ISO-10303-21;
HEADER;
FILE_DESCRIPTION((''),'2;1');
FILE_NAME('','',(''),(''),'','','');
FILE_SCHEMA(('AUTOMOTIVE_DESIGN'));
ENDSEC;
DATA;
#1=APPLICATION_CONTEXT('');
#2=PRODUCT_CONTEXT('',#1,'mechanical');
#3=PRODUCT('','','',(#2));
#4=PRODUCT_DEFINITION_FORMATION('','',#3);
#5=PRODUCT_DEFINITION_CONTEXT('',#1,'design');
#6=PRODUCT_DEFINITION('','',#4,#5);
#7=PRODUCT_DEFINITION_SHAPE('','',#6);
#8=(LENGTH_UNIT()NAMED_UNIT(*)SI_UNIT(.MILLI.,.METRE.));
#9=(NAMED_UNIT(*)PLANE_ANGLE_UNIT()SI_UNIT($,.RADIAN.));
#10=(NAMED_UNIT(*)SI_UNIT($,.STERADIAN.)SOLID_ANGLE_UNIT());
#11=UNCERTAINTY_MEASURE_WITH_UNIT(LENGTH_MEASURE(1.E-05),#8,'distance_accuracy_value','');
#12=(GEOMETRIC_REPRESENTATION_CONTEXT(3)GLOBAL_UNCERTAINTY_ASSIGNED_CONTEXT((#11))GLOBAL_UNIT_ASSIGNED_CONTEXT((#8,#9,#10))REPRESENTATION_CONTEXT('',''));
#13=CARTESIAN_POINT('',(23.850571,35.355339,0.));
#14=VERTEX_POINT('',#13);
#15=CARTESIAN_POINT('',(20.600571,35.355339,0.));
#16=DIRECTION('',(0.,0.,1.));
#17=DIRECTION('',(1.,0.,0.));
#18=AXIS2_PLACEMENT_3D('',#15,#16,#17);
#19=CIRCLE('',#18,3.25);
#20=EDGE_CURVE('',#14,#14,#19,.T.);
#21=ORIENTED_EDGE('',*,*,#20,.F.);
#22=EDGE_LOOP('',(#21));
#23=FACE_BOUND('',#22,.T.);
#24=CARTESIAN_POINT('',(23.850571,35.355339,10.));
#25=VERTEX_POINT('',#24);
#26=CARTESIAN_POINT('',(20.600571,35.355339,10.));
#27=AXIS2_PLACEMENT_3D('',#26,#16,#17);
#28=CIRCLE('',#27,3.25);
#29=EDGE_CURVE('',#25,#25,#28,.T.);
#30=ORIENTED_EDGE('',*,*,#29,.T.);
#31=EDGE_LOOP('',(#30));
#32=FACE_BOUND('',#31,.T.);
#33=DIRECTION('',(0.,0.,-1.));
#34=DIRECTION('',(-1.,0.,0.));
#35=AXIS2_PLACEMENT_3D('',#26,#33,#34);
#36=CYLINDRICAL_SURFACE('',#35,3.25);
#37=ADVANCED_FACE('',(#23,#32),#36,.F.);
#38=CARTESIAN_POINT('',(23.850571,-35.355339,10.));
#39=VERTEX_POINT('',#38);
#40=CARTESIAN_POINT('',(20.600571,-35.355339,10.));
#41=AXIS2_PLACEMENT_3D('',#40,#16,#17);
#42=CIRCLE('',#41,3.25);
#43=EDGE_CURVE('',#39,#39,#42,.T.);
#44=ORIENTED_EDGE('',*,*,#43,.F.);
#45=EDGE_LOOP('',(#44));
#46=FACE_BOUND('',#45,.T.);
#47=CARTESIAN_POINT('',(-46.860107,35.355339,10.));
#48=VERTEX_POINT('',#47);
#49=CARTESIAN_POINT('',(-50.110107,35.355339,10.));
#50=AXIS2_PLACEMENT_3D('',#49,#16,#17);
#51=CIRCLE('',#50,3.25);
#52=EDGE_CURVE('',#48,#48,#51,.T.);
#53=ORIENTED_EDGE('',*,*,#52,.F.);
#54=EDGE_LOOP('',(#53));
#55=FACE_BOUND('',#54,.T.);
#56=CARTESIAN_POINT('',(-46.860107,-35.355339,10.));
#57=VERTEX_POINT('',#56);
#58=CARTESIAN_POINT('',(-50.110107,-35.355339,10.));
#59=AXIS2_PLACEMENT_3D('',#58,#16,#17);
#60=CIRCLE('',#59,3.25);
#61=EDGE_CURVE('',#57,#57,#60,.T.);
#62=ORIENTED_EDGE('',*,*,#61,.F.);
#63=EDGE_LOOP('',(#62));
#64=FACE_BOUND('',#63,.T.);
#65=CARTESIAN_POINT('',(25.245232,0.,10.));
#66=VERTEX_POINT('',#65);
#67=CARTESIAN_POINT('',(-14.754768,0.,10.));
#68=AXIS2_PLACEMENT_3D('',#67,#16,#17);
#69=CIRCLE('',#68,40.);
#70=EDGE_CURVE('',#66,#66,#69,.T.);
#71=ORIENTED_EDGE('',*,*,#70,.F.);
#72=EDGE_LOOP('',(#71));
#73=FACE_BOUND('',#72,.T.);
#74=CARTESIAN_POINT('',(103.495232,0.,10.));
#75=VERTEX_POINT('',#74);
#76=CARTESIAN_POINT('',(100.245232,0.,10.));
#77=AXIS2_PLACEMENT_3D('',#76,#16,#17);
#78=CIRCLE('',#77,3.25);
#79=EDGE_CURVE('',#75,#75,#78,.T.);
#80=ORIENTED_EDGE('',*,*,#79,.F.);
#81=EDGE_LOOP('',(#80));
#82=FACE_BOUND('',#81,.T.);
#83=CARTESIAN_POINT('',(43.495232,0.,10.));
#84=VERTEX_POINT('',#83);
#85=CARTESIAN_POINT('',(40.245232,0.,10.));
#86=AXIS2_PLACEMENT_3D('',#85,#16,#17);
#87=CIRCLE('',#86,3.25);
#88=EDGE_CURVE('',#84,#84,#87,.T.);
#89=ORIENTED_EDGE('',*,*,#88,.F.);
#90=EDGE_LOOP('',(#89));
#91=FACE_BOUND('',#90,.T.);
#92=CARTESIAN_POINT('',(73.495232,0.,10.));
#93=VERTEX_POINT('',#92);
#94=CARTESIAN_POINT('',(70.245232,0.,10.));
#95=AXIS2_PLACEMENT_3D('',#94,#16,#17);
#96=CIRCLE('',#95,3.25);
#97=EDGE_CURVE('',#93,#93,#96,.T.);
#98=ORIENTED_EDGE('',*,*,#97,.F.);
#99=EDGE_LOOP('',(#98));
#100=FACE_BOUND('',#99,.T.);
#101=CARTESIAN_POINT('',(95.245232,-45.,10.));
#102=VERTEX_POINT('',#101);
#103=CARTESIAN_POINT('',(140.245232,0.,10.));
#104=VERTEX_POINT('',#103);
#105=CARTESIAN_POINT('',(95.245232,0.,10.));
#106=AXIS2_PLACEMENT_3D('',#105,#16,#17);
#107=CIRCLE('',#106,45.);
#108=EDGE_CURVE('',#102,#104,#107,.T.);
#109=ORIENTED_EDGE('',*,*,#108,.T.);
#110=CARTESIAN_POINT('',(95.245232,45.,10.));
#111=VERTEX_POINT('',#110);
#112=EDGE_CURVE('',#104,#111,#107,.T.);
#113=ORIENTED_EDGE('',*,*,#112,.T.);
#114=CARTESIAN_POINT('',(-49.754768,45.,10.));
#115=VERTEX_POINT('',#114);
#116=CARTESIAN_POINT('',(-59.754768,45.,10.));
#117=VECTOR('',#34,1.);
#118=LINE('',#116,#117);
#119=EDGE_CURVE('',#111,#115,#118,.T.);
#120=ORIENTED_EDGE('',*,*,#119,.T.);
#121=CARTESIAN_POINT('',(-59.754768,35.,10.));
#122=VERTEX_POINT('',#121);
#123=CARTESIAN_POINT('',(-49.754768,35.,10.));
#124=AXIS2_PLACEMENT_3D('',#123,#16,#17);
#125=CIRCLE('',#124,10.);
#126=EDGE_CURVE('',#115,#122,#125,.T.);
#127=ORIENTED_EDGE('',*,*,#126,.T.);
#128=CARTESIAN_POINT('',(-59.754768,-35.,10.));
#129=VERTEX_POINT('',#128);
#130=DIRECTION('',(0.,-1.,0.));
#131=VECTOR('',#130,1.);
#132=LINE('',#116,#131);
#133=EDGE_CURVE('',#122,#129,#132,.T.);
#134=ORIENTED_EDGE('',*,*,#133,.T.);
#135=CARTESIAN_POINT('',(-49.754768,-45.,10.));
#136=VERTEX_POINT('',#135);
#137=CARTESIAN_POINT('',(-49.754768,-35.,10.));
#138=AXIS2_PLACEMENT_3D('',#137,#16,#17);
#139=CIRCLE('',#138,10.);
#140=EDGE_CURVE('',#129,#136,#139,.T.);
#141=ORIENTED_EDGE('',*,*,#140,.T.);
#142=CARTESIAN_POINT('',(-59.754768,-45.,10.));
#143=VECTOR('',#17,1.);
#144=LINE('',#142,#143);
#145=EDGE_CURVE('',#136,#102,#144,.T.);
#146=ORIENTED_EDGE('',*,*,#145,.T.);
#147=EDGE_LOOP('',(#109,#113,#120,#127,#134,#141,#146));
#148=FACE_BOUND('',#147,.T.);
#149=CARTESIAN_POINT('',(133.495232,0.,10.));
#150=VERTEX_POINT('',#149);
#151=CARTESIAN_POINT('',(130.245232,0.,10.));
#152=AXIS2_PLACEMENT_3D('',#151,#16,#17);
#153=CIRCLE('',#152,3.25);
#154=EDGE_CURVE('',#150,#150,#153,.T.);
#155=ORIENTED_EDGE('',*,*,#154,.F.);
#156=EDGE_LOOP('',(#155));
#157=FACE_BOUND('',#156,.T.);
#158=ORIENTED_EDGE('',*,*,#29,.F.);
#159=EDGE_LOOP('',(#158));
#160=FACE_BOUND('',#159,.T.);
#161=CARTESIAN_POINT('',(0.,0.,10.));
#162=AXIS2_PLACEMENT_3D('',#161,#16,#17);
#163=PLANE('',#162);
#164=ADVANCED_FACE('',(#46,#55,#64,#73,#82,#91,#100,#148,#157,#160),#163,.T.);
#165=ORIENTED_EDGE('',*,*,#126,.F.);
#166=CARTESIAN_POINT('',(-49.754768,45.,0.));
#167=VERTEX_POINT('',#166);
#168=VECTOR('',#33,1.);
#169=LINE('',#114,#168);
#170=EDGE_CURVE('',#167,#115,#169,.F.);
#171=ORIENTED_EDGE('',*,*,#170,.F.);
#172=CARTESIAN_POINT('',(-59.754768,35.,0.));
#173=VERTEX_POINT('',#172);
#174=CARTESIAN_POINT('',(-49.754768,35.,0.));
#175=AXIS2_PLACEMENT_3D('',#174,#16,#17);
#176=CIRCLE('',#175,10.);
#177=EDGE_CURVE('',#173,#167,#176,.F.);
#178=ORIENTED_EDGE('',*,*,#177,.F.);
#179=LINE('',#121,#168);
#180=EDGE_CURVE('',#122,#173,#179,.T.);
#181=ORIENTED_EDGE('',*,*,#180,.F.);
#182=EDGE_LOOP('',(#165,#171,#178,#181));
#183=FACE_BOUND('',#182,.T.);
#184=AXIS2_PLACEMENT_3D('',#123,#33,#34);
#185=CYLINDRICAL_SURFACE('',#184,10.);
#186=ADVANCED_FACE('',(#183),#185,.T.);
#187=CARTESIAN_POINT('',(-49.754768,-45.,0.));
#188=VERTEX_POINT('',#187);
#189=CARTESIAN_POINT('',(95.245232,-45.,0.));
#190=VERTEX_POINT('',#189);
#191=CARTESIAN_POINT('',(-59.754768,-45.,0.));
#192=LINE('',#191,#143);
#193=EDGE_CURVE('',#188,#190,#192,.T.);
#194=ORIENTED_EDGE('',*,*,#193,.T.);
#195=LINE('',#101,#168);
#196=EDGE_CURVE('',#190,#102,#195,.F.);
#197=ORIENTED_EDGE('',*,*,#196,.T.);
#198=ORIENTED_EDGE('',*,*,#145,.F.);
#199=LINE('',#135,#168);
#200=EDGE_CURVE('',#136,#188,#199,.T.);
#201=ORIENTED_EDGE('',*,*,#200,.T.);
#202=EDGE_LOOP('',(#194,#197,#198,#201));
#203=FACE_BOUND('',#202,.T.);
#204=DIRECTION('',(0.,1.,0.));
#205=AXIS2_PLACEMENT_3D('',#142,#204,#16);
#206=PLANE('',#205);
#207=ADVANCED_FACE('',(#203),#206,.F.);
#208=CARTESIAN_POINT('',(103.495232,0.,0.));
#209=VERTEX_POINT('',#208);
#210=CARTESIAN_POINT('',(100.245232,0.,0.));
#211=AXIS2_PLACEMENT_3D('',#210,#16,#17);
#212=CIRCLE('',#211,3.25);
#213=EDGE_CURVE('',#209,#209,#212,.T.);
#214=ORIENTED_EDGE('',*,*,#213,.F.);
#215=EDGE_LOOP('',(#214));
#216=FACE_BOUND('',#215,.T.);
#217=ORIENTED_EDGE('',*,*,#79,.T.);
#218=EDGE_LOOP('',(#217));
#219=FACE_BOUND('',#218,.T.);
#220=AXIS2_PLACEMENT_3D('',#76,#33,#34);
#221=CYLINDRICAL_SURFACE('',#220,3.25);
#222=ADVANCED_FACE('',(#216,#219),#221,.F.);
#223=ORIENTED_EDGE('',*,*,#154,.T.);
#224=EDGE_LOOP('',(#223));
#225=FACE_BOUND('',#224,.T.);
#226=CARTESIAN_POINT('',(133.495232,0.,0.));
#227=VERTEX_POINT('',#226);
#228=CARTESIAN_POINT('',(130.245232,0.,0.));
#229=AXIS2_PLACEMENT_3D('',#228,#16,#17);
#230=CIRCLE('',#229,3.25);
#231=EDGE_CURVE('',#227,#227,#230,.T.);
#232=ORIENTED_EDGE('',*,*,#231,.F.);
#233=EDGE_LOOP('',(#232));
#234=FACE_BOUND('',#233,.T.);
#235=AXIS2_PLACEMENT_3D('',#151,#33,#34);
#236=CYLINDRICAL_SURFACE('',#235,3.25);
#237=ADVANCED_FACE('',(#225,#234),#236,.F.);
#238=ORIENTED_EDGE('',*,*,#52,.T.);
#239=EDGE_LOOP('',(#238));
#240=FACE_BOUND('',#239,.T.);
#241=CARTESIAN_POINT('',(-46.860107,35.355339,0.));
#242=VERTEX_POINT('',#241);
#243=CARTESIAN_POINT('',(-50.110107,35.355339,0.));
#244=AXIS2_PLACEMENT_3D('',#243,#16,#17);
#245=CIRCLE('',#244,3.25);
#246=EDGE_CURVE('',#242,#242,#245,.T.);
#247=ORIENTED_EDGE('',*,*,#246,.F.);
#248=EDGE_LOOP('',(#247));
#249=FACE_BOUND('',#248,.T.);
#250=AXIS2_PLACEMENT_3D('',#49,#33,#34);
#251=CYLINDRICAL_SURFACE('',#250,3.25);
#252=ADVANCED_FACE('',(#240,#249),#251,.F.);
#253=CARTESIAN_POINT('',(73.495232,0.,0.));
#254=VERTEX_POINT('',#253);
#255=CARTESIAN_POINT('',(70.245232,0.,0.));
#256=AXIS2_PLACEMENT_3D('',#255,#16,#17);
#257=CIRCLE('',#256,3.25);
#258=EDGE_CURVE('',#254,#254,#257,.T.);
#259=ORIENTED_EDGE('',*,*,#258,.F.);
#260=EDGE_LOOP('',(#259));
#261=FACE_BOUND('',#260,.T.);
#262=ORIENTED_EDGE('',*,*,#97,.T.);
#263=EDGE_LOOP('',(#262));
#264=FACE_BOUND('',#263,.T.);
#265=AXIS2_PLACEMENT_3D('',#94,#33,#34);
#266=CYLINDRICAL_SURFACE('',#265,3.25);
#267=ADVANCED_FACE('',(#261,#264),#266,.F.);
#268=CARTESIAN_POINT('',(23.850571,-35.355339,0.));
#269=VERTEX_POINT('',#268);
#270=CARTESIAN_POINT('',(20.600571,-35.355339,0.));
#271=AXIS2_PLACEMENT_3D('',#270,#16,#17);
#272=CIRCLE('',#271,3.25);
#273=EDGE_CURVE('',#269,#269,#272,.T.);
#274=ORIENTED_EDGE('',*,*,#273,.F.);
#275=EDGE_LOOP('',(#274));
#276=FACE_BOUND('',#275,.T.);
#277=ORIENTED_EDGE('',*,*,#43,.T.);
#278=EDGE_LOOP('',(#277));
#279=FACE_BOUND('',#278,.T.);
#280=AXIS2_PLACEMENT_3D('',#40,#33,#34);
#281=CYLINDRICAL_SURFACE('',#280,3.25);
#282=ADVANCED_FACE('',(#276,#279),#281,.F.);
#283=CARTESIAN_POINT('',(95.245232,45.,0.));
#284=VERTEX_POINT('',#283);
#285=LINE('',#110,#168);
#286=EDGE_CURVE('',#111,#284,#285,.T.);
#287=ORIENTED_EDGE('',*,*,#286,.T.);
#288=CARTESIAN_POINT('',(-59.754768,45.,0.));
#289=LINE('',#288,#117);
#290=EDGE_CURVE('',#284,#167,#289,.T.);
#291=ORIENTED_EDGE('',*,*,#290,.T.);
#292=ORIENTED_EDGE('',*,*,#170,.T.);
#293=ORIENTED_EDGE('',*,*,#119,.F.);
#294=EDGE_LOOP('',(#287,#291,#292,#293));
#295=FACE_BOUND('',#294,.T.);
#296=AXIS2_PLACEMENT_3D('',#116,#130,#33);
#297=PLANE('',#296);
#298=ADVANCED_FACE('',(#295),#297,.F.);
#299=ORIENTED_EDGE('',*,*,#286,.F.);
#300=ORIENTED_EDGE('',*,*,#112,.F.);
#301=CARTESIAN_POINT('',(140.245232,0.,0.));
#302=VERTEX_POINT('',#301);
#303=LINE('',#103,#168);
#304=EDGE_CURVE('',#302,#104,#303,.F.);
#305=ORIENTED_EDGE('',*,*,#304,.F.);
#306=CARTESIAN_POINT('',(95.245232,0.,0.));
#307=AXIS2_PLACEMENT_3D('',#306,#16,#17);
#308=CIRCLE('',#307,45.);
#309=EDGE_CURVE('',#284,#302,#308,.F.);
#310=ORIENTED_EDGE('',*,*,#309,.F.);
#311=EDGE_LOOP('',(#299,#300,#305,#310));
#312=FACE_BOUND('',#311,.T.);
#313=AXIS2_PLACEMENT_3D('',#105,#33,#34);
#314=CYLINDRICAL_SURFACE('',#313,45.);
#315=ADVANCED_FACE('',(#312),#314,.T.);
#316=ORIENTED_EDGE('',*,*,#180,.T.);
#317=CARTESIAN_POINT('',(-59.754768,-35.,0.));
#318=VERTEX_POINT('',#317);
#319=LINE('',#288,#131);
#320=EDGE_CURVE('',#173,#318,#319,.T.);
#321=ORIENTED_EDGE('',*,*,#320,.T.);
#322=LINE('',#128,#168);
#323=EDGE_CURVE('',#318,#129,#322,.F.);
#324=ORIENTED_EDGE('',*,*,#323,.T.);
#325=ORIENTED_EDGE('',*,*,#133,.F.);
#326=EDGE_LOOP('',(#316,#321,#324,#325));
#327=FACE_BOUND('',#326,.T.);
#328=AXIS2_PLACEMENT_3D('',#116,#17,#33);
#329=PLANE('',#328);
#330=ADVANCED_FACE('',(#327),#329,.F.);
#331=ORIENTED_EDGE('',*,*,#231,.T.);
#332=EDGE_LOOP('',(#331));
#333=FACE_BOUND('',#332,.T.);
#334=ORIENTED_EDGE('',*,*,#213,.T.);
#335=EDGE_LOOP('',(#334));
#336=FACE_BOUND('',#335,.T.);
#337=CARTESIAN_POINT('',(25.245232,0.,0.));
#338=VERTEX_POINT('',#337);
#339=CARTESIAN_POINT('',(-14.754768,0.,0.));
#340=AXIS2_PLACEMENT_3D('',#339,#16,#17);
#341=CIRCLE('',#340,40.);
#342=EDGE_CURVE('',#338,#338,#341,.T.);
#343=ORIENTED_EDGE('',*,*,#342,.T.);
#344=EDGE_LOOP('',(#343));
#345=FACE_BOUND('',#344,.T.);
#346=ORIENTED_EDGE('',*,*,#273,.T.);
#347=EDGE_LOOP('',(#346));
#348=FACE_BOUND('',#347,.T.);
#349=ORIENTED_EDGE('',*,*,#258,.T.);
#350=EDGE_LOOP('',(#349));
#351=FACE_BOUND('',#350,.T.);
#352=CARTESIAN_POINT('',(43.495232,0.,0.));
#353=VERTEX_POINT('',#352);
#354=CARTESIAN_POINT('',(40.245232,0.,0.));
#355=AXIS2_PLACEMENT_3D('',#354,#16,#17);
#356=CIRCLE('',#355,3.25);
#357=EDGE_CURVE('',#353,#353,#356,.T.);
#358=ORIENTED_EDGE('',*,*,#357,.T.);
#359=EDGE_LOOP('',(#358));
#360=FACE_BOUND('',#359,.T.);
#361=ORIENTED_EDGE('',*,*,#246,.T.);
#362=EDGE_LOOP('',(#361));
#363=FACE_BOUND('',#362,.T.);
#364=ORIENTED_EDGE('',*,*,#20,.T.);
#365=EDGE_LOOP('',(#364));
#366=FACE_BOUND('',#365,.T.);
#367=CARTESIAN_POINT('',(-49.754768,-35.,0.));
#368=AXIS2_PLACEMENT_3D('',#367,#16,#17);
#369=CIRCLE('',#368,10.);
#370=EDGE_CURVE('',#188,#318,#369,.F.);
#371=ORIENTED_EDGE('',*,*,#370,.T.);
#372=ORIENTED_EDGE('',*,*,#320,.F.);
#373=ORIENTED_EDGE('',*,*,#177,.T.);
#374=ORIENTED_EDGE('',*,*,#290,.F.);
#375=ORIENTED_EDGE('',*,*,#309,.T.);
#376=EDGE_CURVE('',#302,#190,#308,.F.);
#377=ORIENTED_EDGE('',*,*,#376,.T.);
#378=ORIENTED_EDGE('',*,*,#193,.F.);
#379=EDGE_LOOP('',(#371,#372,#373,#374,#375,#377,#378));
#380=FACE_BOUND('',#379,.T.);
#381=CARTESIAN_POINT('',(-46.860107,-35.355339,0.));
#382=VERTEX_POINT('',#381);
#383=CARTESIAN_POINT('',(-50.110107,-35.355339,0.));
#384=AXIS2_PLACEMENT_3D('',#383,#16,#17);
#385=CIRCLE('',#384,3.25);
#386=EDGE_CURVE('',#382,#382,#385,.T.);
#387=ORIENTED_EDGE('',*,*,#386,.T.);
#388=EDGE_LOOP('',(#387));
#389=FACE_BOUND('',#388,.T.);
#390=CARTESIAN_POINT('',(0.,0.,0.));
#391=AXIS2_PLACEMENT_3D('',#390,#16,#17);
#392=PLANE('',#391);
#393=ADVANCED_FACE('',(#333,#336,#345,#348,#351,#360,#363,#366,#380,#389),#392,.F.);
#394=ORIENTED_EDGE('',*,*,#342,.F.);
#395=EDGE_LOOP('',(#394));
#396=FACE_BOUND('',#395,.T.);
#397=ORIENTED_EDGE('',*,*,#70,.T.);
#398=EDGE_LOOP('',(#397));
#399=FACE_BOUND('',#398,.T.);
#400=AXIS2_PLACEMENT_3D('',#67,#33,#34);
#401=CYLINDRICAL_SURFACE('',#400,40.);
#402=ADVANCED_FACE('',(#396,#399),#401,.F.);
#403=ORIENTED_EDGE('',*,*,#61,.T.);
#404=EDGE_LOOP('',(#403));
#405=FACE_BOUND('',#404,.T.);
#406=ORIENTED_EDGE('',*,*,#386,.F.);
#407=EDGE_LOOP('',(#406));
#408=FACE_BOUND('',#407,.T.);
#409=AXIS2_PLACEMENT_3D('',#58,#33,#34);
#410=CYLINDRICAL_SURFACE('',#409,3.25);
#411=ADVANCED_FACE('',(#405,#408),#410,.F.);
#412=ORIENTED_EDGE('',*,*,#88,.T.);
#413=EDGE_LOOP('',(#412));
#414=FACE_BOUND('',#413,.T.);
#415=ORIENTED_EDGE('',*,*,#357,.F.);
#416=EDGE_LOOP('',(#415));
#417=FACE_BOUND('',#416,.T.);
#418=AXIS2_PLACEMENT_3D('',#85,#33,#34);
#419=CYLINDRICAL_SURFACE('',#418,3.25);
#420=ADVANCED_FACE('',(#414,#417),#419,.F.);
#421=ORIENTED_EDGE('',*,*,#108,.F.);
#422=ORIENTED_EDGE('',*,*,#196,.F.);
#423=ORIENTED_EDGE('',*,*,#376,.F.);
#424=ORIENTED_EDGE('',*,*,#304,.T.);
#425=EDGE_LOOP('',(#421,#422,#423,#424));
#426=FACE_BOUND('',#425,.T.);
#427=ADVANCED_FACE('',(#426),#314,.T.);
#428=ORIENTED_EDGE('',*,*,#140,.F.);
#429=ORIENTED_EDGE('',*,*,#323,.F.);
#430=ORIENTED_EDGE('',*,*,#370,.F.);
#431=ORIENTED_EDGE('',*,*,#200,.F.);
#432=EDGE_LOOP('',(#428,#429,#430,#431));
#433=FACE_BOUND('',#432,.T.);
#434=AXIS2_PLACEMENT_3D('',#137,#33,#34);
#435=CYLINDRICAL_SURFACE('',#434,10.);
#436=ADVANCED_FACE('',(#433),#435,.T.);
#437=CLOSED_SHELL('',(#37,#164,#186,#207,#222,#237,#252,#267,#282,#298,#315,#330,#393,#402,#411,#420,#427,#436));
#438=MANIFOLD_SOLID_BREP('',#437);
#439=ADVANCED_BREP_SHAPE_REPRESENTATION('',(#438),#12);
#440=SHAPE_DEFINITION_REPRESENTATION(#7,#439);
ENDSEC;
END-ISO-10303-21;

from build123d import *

# Parameters (mm, degrees)
SKETCH1_W           = 200
SKETCH1_H           = 90
SKETCH1_R           = 3.25
SKETCH1_R_2         = 40
BOSS_EXTRUDE1_DEPTH = 10
FILLET1_R           = 45
FILLET2_R           = 10


with BuildPart() as part:
    # Sketch1 → Boss-Extrude1 (new body)
    with BuildSketch(Plane.XY):
        with Locations((40.245231608, 0)):
            Rectangle(SKETCH1_W, SKETCH1_H)
        with Locations((-50.110107452, 35.355339059)):
            Circle(SKETCH1_R, mode=Mode.SUBTRACT)
        with Locations((20.600570667, 35.355339059)):
            Circle(SKETCH1_R, mode=Mode.SUBTRACT)
        with Locations((20.600570667, -35.355339059)):
            Circle(SKETCH1_R, mode=Mode.SUBTRACT)
        with Locations((-50.110107452, -35.355339059)):
            Circle(SKETCH1_R, mode=Mode.SUBTRACT)
        with Locations((-14.754768392, 0)):
            Circle(SKETCH1_R_2, mode=Mode.SUBTRACT)
        with Locations((40.245231608, 0)):
            Circle(SKETCH1_R, mode=Mode.SUBTRACT)
        with Locations((70.245231608, 0)):
            Circle(SKETCH1_R, mode=Mode.SUBTRACT)
        with Locations((100.245231608, 0)):
            Circle(SKETCH1_R, mode=Mode.SUBTRACT)
        with Locations((130.245231608, 0)):
            Circle(SKETCH1_R, mode=Mode.SUBTRACT)
    extrude(amount=BOSS_EXTRUDE1_DEPTH)

    # Fillet1
    fillet1_edges = [part.edges().sort_by_distance(p)[0] for p in [
        (140.245231608, -45, 5),
        (140.245231608, 45, 5),
    ]]
    fillet(fillet1_edges, radius=FILLET1_R - 0.0001)  # a hair under: the kernel refuses the full size

    # Fillet2
    fillet2_edges = [part.edges().sort_by_distance(p)[0] for p in [
        (-59.754768392, -45, 5),
        (-59.754768392, 45, 5),
    ]]
    fillet(fillet2_edges, radius=FILLET2_R)


solid = part.part
